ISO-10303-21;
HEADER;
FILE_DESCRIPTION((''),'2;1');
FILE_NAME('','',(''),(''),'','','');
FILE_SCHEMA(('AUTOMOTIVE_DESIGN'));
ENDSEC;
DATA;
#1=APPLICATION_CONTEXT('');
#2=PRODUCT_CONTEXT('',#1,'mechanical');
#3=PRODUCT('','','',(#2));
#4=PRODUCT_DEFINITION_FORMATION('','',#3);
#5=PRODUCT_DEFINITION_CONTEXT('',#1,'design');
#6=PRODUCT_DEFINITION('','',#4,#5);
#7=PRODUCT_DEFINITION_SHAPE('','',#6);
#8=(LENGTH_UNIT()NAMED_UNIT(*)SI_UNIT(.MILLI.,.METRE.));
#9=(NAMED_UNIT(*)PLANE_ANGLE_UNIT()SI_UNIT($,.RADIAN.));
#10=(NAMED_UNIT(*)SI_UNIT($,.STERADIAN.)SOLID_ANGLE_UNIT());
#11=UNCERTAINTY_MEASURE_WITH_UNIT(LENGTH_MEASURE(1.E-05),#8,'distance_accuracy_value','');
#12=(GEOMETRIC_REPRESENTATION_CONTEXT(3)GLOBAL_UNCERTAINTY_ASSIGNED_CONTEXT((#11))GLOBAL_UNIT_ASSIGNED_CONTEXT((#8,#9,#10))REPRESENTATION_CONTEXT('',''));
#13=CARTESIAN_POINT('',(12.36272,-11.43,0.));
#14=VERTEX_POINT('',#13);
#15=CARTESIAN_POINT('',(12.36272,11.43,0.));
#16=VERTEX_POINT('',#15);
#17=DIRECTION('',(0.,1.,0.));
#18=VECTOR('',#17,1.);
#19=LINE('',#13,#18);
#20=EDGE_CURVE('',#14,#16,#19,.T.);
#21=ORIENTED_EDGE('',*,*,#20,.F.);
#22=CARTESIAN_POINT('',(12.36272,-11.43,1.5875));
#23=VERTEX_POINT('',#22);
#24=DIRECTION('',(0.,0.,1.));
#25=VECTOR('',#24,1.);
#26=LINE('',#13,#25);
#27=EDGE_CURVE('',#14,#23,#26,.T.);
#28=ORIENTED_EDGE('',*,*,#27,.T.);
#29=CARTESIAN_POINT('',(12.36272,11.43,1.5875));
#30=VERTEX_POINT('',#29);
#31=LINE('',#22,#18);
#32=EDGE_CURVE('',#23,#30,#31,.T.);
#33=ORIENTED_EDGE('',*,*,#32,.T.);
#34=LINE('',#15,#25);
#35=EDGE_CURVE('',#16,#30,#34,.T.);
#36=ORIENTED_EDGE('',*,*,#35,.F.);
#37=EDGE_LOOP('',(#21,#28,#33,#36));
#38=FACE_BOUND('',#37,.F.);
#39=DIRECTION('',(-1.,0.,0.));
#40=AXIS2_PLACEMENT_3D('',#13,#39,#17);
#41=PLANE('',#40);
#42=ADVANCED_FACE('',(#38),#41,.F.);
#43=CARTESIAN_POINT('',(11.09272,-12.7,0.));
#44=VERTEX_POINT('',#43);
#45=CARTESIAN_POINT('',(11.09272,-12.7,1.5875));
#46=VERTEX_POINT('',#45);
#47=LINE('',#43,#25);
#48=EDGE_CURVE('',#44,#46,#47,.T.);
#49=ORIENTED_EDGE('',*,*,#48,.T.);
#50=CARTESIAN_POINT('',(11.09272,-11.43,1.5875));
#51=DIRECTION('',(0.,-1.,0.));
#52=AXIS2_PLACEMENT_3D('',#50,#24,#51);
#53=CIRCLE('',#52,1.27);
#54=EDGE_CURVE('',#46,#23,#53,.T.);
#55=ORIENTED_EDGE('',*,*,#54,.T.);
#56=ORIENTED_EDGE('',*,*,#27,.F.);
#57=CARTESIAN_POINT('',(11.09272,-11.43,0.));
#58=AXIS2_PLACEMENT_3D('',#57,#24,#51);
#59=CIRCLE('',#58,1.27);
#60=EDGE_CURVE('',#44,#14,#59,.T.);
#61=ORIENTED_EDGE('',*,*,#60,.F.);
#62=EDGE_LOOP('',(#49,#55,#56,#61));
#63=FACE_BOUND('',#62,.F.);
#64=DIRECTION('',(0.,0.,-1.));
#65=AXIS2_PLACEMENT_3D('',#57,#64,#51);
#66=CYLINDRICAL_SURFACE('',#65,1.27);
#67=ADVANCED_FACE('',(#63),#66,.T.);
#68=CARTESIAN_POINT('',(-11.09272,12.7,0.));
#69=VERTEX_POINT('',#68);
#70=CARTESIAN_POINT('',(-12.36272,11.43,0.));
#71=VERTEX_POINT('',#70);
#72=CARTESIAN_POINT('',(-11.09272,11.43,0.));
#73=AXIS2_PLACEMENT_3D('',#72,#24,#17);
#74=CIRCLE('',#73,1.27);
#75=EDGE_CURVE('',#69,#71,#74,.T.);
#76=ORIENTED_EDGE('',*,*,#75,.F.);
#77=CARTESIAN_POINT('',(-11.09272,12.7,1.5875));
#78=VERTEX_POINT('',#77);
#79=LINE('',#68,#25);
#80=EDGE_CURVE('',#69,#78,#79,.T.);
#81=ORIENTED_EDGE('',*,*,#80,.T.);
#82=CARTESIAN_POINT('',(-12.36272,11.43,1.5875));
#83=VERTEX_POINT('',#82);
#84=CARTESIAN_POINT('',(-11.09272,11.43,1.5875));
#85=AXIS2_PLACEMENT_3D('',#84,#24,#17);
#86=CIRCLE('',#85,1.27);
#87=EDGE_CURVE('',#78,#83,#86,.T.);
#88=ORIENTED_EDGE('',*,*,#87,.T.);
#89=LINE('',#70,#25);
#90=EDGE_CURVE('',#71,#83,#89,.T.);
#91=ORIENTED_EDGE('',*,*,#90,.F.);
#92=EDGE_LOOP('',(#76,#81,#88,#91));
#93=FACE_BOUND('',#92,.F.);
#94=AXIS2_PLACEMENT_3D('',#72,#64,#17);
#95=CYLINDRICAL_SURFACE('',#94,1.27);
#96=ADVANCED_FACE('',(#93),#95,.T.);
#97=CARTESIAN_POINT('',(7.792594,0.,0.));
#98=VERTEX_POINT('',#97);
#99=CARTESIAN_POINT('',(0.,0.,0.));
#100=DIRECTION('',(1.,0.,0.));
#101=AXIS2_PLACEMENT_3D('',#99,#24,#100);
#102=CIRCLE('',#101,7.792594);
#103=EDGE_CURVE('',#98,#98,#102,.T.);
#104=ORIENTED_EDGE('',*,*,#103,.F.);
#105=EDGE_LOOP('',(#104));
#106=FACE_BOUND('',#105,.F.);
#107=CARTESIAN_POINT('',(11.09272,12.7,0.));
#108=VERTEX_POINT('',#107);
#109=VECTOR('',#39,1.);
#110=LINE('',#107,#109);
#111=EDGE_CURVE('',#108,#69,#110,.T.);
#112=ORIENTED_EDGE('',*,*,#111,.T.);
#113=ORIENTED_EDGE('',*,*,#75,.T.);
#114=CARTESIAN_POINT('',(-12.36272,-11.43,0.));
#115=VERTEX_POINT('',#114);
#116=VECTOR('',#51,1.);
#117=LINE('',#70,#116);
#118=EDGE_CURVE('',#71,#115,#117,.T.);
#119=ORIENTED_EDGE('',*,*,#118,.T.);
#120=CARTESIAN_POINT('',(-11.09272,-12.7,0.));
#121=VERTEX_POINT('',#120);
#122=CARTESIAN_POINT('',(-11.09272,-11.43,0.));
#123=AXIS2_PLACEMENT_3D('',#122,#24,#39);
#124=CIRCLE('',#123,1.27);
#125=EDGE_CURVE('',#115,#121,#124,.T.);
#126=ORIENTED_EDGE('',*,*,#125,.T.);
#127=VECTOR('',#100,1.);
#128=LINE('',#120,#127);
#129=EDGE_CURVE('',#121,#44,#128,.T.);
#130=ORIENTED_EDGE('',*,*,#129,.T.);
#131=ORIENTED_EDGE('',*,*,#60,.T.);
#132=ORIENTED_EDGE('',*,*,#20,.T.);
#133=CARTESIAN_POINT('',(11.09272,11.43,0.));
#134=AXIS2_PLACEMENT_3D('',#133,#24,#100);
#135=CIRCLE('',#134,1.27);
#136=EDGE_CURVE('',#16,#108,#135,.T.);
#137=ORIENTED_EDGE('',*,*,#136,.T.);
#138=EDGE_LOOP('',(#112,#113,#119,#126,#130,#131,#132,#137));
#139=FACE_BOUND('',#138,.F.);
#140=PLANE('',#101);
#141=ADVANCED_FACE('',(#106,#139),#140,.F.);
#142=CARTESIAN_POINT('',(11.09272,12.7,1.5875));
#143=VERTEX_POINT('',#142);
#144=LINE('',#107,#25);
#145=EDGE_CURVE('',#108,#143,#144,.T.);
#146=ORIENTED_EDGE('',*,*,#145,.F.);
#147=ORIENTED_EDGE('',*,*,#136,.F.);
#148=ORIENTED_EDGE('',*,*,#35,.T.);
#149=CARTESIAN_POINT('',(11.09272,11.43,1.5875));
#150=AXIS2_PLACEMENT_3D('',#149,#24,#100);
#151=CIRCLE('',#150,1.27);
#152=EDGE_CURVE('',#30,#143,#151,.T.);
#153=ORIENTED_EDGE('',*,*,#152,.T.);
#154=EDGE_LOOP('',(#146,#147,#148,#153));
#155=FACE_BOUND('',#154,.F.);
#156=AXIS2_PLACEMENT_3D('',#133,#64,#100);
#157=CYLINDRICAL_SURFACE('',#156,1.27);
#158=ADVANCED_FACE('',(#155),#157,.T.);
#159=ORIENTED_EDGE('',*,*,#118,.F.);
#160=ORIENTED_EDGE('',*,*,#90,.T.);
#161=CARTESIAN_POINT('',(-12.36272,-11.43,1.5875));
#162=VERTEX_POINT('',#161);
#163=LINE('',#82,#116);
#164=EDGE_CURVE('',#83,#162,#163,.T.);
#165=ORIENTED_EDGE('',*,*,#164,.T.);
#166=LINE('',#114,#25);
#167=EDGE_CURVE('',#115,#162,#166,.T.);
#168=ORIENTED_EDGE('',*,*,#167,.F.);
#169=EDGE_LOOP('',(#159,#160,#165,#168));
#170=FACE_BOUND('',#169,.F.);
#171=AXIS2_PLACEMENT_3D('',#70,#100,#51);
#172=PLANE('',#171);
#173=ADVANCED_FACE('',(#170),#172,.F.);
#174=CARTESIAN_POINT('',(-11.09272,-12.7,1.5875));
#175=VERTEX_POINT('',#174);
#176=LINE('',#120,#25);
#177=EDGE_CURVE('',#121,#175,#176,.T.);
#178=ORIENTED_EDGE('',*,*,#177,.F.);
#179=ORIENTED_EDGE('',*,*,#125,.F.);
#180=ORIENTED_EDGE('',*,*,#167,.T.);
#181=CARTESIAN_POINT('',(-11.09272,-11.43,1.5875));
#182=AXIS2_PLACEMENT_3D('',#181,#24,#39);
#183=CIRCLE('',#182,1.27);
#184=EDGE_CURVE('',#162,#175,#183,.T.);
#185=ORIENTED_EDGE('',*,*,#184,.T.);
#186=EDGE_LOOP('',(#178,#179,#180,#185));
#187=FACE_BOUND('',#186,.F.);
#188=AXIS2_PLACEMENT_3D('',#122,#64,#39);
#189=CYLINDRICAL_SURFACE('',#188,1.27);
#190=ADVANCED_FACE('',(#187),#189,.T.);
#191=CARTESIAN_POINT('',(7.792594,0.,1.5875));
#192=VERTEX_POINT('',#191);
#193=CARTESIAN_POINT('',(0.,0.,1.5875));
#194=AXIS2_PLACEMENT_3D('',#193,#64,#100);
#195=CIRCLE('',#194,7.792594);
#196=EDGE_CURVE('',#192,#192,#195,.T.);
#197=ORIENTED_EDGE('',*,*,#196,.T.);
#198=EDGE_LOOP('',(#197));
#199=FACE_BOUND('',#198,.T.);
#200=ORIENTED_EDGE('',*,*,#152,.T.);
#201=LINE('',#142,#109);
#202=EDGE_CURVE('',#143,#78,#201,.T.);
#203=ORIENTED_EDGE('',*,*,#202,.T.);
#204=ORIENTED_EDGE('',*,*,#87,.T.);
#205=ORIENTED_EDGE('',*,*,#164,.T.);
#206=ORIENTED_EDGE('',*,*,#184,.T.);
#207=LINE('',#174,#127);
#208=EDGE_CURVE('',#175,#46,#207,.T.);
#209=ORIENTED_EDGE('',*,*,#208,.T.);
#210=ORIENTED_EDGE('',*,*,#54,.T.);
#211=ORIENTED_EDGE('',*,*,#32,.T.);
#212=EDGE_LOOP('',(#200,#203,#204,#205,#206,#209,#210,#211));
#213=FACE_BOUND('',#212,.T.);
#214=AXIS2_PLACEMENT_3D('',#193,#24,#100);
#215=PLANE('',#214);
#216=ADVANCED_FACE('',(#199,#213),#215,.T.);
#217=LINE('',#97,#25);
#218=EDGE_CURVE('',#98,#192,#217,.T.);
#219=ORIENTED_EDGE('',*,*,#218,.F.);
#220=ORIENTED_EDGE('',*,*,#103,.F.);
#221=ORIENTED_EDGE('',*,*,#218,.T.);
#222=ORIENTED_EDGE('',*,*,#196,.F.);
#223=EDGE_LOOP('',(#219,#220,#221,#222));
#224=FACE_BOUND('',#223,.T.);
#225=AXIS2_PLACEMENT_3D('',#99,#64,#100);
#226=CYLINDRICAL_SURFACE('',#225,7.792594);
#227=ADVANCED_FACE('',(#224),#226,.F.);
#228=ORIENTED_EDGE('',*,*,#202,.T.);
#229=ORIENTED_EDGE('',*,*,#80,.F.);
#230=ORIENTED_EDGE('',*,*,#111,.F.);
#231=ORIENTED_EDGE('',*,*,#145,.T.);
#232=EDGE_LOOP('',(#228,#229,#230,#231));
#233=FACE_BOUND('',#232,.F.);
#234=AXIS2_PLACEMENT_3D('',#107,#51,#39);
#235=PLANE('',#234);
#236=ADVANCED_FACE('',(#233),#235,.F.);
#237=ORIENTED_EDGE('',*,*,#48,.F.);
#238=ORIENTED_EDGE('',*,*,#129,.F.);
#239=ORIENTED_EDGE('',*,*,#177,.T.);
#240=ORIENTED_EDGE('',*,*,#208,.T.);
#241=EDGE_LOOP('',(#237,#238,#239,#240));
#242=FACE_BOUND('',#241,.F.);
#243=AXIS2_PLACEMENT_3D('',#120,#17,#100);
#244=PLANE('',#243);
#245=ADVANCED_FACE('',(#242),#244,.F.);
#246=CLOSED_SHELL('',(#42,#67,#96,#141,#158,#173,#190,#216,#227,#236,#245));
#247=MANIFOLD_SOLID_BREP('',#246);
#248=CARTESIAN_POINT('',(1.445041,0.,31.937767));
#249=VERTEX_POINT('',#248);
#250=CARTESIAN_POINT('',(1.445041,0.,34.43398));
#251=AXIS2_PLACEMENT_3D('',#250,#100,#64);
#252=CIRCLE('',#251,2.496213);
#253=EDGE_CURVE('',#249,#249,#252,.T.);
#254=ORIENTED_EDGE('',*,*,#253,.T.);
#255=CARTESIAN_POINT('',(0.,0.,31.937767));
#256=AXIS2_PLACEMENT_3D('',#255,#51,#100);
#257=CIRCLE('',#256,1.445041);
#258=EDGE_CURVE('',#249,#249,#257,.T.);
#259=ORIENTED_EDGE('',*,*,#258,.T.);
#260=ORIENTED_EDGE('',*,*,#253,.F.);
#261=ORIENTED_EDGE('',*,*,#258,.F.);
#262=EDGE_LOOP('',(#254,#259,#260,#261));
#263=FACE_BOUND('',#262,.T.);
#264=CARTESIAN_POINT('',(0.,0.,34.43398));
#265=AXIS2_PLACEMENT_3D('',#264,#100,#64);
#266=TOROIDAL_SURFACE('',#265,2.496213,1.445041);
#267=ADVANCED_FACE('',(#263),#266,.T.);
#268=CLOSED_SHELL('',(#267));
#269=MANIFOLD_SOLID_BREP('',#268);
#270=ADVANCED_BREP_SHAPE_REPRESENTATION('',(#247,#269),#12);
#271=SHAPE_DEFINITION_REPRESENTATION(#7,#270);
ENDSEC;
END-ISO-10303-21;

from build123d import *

# Parameters (mm, degrees)
F1_DEPTH = 1.5875
F4_R     = 1.445040765
F6_R     = 7.792593953
F7_DEPTH = 1.651


# Not quite as in the source:
# - the program builds the solid bodies; features that only make, move or delete a surface that nothing else refers to are left out


with BuildPart() as f1:
    # F0 (on Top) → F1 (new body)
    with BuildSketch(Plane.XY):
        with BuildLine():
            Line((-11.092720091, -12.7), (11.092720091, -12.7))
            ThreePointArc((11.092720091, -12.7), (11.9907457031, -12.3280256121), (12.362720091, -11.43))
            Line((12.362720091, -11.43), (12.362720091, 11.43))
            ThreePointArc((12.362720091, 11.43), (11.9907457031, 12.3280256121), (11.092720091, 12.7))
            Line((11.092720091, 12.7), (-11.092720091, 12.7))
            ThreePointArc((-11.092720091, 12.7), (-11.9907457031, 12.3280256121), (-12.362720091, 11.43))
            Line((-12.362720091, 11.43), (-12.362720091, -11.43))
            ThreePointArc((-12.362720091, -11.43), (-11.9907457031, -12.3280256121), (-11.092720091, -12.7))
        make_face()
    extrude(amount=F1_DEPTH)

    # F6 (on Top) → F7 (cut)
    with BuildSketch(Plane.XY):
        Circle(F6_R)
    extrude(amount=F7_DEPTH, mode=Mode.SUBTRACT)


with BuildPart() as f5:
    # F4 (on Front) → F5 (revolve)
    with BuildSketch(Plane.XZ):
        with Locations((0, 31.9377668202)):
            Circle(F4_R)
    revolve(axis=Axis((0.2411192982, 0, 34.4339795411), (1, 0, 0)))


solid = Compound([f1.part, f5.part])
